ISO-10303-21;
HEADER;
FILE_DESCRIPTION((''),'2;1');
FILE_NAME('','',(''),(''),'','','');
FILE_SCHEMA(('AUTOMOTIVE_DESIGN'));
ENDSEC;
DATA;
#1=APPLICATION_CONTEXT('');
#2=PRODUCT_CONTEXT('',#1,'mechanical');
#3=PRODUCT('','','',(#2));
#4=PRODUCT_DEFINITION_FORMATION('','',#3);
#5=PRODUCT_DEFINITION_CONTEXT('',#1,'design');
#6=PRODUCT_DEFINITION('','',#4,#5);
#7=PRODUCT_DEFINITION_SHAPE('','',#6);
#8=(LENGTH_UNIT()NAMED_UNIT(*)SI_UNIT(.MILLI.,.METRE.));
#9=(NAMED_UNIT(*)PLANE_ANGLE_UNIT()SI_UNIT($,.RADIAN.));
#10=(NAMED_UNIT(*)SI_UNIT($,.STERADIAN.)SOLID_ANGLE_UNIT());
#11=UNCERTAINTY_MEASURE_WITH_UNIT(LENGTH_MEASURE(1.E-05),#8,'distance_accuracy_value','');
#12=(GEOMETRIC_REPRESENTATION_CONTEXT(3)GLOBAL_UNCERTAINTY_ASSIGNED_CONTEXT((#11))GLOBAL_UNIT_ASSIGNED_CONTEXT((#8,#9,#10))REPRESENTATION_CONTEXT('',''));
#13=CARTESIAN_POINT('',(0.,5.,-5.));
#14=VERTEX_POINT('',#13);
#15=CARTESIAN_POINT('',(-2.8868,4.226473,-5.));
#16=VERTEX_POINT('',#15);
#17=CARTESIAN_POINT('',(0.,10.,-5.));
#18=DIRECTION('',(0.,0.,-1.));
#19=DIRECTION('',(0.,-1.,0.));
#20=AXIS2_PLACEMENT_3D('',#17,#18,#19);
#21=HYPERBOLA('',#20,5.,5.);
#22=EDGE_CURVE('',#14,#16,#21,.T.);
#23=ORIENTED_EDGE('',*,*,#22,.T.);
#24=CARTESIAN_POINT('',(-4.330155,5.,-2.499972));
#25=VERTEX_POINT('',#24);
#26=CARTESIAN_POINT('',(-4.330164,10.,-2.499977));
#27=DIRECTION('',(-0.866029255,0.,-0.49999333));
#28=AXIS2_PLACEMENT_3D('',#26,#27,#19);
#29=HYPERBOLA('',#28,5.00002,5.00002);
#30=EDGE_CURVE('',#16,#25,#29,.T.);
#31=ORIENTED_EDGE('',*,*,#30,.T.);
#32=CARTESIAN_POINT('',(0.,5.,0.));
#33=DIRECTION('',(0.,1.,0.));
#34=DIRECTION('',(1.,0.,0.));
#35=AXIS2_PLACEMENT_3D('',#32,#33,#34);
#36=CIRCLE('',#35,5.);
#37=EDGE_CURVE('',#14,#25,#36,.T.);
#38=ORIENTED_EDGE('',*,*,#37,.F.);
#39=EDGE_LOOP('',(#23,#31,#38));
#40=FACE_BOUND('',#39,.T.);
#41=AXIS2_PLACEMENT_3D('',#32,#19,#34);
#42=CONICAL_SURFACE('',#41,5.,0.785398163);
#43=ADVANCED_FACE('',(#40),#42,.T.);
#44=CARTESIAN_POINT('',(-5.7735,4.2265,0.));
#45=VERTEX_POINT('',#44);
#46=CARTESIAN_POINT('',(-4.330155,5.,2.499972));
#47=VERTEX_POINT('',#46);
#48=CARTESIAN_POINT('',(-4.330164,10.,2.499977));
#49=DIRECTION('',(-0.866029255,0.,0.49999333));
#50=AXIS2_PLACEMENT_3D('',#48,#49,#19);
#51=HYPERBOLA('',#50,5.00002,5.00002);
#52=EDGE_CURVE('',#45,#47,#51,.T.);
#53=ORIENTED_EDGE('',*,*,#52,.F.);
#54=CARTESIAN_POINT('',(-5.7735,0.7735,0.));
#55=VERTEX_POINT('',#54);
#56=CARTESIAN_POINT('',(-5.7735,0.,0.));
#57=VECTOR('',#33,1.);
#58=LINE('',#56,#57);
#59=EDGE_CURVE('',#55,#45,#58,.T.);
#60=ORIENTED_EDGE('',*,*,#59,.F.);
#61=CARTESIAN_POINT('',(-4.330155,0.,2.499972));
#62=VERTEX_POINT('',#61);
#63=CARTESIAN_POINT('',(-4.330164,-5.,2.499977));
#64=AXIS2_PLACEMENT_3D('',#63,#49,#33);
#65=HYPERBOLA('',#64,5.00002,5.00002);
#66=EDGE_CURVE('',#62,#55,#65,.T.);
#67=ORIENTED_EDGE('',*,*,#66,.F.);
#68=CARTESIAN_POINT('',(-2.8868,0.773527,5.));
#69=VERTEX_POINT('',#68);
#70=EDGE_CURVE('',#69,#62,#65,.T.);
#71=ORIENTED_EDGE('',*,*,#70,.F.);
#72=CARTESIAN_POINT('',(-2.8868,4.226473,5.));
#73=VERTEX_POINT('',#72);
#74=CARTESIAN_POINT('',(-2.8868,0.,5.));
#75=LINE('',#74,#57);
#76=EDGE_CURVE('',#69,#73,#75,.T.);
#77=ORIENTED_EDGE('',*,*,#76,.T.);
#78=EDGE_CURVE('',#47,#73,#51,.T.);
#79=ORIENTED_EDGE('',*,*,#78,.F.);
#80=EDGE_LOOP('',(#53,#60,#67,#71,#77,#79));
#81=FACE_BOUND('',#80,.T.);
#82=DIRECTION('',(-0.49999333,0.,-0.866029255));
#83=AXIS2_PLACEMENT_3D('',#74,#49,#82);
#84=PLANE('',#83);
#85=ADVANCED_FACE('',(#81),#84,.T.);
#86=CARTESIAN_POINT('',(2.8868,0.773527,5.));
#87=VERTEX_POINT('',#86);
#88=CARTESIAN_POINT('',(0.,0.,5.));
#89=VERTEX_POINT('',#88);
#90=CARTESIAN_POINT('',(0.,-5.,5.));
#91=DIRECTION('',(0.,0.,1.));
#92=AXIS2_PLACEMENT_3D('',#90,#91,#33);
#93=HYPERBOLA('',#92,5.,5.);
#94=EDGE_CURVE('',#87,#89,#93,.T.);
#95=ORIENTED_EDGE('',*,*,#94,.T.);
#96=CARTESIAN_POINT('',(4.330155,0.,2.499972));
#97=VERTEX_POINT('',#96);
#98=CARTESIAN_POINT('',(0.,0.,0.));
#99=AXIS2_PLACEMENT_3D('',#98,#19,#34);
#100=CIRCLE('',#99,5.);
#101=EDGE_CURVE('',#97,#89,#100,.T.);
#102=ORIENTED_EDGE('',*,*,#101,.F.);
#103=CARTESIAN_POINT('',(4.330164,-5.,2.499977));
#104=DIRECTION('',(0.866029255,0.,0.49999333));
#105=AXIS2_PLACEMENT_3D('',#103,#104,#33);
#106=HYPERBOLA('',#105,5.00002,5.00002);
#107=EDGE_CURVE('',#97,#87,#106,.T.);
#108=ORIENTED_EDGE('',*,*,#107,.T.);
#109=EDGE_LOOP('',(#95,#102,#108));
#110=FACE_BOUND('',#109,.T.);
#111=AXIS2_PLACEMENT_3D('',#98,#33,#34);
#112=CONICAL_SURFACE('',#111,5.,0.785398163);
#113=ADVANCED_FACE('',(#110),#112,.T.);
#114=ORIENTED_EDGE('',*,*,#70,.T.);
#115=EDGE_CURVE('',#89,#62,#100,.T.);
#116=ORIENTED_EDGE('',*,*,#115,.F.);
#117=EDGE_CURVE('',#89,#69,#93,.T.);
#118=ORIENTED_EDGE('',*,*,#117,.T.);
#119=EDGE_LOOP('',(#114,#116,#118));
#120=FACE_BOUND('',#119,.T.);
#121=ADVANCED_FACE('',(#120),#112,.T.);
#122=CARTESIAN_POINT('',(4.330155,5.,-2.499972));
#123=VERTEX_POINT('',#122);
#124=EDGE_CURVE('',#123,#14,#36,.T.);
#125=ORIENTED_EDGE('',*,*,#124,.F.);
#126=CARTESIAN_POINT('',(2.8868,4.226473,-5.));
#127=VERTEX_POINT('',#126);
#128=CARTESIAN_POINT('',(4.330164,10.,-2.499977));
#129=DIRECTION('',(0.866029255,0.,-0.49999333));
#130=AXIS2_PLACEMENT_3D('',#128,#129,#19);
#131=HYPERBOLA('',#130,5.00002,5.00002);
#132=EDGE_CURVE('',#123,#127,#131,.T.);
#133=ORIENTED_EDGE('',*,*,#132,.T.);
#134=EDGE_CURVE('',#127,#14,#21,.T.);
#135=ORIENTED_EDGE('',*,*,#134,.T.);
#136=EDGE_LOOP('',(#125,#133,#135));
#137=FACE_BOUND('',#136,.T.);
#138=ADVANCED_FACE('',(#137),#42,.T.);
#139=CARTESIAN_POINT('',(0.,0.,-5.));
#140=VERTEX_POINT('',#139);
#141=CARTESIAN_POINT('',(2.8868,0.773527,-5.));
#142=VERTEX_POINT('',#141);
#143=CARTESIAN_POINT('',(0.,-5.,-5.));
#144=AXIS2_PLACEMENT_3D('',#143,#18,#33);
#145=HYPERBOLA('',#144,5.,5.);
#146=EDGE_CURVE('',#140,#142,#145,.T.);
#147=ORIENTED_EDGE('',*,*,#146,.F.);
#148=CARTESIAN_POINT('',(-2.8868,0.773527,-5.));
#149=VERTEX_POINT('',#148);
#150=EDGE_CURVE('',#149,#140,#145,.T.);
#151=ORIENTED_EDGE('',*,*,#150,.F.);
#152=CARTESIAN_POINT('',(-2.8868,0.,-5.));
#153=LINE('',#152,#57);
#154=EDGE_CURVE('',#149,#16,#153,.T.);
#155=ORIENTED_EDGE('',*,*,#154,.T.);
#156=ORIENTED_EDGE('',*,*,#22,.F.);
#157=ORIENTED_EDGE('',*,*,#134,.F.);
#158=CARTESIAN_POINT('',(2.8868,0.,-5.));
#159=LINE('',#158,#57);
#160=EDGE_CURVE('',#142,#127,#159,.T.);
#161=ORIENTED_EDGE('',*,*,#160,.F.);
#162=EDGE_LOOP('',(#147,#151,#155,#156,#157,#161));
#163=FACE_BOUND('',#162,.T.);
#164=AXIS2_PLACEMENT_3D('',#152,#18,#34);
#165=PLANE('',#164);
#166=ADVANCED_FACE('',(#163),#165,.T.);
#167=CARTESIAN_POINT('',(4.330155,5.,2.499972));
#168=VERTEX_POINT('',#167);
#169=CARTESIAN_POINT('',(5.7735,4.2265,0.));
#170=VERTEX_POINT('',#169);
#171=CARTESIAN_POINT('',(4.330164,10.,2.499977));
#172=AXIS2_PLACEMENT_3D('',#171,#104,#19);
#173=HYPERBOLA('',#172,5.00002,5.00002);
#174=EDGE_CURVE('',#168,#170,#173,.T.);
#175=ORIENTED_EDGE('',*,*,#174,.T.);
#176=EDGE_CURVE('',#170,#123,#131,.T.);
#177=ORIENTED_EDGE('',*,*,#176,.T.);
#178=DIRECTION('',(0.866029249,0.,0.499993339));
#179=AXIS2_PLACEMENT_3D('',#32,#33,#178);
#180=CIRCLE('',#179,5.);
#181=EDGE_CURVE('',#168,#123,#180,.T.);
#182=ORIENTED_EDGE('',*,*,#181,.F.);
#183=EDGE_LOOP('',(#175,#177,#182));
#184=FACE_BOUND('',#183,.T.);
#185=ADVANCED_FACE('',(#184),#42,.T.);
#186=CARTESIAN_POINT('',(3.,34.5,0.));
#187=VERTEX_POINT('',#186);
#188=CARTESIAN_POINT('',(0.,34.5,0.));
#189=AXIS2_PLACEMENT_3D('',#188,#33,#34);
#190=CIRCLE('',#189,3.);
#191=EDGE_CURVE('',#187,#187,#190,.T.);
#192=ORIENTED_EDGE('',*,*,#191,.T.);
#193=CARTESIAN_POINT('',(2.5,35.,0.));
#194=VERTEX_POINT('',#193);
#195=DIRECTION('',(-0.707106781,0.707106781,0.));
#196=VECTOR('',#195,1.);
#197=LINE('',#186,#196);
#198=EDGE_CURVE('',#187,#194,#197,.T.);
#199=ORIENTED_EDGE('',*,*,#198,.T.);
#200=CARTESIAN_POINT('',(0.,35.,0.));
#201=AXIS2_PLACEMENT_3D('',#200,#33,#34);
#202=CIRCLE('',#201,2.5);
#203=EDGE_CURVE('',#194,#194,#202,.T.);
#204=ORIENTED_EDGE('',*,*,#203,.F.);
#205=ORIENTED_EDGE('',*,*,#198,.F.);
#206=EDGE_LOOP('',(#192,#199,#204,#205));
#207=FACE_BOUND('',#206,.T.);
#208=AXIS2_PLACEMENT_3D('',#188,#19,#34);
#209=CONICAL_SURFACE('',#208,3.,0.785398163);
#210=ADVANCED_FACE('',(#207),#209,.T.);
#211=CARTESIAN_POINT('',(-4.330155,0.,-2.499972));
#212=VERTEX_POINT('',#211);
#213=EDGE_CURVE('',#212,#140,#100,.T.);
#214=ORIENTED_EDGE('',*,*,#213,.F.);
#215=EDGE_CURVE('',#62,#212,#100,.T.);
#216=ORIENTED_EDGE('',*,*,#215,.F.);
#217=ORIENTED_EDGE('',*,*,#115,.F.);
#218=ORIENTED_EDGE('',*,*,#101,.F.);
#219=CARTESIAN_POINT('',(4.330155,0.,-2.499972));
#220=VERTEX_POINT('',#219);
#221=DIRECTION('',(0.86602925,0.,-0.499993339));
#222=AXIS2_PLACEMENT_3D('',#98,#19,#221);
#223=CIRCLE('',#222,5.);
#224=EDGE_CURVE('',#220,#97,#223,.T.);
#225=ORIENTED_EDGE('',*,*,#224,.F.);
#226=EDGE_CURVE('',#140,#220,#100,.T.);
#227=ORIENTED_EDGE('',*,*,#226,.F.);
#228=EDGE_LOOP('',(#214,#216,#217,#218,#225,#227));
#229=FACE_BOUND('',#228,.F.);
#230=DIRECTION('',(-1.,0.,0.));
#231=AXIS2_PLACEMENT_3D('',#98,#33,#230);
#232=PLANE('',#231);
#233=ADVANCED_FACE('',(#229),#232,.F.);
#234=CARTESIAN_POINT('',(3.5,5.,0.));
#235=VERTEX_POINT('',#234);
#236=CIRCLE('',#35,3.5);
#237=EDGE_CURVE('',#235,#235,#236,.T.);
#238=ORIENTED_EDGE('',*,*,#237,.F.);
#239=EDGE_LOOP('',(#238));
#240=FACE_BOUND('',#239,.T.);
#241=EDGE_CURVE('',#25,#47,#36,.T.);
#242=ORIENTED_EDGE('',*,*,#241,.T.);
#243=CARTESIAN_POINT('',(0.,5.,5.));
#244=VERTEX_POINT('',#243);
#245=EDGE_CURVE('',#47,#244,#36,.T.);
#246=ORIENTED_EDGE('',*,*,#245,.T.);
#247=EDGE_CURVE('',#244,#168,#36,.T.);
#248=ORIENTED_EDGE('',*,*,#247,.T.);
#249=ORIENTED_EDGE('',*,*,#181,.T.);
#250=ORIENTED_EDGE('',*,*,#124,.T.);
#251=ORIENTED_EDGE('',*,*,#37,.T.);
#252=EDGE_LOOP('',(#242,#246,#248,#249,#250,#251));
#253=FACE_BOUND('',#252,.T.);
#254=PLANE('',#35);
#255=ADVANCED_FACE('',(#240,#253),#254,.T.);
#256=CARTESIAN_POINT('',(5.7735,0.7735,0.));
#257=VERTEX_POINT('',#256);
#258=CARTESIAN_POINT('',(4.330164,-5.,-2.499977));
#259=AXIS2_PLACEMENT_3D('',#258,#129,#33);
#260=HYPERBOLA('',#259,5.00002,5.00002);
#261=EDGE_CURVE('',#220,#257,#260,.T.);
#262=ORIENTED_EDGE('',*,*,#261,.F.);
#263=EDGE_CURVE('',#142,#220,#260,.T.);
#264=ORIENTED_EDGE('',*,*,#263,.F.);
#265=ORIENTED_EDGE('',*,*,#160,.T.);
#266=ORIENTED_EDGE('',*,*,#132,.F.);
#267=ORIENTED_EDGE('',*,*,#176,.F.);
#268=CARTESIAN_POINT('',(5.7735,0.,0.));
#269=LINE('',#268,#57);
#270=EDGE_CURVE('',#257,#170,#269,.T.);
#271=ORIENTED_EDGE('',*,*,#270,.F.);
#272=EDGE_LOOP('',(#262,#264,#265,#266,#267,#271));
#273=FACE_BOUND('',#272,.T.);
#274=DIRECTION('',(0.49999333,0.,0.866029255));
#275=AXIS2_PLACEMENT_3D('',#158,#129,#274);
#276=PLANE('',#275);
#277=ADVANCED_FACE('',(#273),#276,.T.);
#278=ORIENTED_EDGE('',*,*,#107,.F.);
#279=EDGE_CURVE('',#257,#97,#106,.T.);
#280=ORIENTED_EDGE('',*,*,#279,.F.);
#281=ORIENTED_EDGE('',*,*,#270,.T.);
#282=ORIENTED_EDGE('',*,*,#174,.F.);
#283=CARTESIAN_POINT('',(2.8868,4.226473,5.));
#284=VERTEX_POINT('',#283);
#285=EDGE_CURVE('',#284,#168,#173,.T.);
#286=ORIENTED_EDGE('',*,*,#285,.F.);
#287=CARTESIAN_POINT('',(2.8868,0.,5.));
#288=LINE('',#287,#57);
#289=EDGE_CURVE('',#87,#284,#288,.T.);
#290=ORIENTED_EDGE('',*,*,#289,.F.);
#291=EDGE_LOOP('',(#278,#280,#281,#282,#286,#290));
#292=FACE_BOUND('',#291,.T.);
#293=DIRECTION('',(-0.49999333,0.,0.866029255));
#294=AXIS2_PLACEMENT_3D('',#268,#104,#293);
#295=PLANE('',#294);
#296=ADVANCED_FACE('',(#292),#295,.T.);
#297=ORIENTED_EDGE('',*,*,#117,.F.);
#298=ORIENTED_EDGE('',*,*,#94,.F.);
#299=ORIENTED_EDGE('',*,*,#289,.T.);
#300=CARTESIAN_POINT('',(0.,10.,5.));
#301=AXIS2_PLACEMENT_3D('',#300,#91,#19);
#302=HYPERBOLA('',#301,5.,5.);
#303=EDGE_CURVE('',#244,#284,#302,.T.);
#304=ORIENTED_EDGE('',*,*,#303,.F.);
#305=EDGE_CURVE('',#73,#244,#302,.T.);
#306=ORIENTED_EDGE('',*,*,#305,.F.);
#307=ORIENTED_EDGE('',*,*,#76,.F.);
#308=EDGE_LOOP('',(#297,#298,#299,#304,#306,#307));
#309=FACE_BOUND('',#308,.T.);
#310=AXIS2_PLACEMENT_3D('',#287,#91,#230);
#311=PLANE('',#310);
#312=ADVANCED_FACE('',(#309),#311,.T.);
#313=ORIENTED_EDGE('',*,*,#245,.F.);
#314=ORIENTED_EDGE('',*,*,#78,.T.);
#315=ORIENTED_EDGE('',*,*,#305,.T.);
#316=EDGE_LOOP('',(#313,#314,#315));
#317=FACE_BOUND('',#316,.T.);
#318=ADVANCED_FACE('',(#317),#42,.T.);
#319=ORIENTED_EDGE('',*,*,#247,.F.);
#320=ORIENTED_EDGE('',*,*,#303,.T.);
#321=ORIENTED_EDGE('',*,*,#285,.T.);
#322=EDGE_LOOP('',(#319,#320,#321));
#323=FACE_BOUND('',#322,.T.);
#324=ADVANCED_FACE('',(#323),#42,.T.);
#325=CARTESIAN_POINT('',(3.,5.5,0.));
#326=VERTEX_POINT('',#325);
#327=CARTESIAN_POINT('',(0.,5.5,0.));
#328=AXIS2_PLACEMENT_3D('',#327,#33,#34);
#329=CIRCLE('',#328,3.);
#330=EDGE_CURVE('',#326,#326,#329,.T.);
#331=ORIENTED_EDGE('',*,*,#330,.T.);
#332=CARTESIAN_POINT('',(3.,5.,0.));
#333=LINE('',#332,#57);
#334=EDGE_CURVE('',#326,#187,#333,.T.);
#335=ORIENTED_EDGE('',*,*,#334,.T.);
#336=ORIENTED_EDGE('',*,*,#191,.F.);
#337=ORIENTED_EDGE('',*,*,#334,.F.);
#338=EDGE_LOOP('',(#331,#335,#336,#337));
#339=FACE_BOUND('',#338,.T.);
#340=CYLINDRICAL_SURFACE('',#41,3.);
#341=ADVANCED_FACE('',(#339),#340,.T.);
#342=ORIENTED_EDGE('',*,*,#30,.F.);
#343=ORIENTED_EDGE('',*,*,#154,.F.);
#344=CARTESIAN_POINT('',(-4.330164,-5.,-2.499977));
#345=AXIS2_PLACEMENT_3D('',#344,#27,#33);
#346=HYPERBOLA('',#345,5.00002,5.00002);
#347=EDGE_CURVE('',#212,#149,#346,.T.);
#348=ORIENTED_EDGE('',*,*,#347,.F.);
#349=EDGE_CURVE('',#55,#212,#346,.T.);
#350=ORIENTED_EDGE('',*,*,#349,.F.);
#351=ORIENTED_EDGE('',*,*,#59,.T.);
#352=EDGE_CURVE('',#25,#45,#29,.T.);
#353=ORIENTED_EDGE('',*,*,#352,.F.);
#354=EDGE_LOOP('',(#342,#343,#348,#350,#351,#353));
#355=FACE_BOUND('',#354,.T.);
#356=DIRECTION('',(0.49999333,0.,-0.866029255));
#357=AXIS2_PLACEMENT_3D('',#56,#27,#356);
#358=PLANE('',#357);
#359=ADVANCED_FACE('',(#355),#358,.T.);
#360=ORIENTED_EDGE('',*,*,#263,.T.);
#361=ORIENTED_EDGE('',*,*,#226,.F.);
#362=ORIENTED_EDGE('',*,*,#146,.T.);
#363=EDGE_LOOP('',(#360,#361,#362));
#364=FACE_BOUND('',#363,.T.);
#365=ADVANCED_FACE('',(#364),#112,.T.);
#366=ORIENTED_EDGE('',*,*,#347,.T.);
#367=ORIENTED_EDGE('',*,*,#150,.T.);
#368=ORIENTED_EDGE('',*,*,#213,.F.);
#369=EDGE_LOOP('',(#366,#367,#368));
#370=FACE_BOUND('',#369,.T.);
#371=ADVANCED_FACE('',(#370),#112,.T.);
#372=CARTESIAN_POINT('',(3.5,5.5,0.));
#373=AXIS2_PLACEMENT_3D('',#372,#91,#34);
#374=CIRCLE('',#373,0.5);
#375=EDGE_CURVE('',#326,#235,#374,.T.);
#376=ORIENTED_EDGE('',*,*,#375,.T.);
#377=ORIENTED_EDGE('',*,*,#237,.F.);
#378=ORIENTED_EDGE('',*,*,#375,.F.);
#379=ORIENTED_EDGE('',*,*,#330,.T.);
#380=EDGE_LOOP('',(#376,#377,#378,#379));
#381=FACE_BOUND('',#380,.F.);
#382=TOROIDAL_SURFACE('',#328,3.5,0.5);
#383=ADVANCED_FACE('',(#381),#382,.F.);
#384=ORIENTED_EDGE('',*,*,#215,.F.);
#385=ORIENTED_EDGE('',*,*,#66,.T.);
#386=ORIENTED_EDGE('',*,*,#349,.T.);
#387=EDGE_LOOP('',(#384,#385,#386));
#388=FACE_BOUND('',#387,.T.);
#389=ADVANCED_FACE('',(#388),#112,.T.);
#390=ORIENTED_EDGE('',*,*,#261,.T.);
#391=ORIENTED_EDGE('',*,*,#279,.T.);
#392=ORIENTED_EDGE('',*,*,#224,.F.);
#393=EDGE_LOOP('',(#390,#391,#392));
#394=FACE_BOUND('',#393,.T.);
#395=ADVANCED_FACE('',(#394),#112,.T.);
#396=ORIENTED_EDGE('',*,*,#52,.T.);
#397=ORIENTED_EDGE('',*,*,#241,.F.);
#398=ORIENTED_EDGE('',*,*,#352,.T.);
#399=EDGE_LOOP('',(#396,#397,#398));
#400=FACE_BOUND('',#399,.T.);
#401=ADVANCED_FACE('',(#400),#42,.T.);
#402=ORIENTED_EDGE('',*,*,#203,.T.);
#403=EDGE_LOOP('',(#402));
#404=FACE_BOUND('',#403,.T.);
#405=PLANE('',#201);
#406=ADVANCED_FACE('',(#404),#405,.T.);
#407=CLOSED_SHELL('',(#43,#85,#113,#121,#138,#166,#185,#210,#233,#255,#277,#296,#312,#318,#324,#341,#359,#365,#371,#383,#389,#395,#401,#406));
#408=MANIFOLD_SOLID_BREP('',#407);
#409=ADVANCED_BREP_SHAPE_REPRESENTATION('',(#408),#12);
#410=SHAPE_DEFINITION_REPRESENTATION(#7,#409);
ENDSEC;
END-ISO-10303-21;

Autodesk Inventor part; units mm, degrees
ref_plane "YZ Plane" through (0, 0, 0) normal (1, 0, 0) x (0, 1, 0)
ref_plane "XZ Plane" through (0, 0, 0) normal (0, 1, 0) x (-1, 0, 0)
ref_plane "XY Plane" through (0, 0, 0) normal (0, 0, 1) x (1, 0, 0)
sketch "Esboço1" plane through (0, 0, 0) normal (0, 1, 0) x (-1, 0, 0)
  circle A0 centre (0, 0) radius 3
  line L0 (-2.8868, -5) -> (-5.7735, 0)
  line L1 (-5.7735, 0) -> (-2.8868, 5)
  line L2 (-2.8868, 5) -> (2.8868, 5)
  line L3 (2.8868, 5) -> (5.7735, 0)
  line L4 (5.7735, 0) -> (2.8868, -5)
  line L5 (2.8868, -5) -> (-2.8868, -5)
  dimension "d0" = 6
extrude "Extrusão1" add sketch "Esboço1" along normal blind 5
sketch "Esboço2" plane through (0, 0, 0) normal (1, 0, 0) x (0, 1, 0)
  point P0 (0, 0)
chamfer "Chanfro1" distance 0.5 angle 45 2 edges at (3, 0, 0) (3, 5, 0)
sketch "Esboço5" plane through (0, 0, 0) normal (0, -1, 0) x (1, 0, 0)
  circle A0 centre (0, 0) radius 5
extrude "Extrusão2" cut sketch "Esboço5" against normal through all draft 45 keep common part
sketch "Esboço6" plane through (0, 5, 0) normal (0, 1, 0) x (1, 0, 0)
  circle A0 centre (0, 0) radius 5
extrude "Extrusão3" cut sketch "Esboço6" against normal through all draft 45 keep common part
sketch "Esboço7" plane through (0, 5, 0) normal (0, 1, 0) x (1, 0, 0)
  circle A0 centre (0, 0) radius 3.5
extrude "Extrusão4" add sketch "Esboço7" against normal blind 5
sketch "Esboço8" plane through (0, 5, 0) normal (0, 1, 0) x (1, 0, 0)
  circle A0 centre (0, 0) radius 3
  dimension "d16" = 6
extrude "Extrusão5" add sketch "Esboço8" along normal blind 30
chamfer "Chanfro2" distance 0.5 angle 45 1 edges at (-3, 35, 0)
fillet "Arredondamento1" radius 0.5 1 edges at (-3, 5, 0)
thread "Rosca2" size "M6x1" class "6g" standard "ANSI Metric M Profile" full length
properties part number "porca m6" material "Aço inoxidável"
